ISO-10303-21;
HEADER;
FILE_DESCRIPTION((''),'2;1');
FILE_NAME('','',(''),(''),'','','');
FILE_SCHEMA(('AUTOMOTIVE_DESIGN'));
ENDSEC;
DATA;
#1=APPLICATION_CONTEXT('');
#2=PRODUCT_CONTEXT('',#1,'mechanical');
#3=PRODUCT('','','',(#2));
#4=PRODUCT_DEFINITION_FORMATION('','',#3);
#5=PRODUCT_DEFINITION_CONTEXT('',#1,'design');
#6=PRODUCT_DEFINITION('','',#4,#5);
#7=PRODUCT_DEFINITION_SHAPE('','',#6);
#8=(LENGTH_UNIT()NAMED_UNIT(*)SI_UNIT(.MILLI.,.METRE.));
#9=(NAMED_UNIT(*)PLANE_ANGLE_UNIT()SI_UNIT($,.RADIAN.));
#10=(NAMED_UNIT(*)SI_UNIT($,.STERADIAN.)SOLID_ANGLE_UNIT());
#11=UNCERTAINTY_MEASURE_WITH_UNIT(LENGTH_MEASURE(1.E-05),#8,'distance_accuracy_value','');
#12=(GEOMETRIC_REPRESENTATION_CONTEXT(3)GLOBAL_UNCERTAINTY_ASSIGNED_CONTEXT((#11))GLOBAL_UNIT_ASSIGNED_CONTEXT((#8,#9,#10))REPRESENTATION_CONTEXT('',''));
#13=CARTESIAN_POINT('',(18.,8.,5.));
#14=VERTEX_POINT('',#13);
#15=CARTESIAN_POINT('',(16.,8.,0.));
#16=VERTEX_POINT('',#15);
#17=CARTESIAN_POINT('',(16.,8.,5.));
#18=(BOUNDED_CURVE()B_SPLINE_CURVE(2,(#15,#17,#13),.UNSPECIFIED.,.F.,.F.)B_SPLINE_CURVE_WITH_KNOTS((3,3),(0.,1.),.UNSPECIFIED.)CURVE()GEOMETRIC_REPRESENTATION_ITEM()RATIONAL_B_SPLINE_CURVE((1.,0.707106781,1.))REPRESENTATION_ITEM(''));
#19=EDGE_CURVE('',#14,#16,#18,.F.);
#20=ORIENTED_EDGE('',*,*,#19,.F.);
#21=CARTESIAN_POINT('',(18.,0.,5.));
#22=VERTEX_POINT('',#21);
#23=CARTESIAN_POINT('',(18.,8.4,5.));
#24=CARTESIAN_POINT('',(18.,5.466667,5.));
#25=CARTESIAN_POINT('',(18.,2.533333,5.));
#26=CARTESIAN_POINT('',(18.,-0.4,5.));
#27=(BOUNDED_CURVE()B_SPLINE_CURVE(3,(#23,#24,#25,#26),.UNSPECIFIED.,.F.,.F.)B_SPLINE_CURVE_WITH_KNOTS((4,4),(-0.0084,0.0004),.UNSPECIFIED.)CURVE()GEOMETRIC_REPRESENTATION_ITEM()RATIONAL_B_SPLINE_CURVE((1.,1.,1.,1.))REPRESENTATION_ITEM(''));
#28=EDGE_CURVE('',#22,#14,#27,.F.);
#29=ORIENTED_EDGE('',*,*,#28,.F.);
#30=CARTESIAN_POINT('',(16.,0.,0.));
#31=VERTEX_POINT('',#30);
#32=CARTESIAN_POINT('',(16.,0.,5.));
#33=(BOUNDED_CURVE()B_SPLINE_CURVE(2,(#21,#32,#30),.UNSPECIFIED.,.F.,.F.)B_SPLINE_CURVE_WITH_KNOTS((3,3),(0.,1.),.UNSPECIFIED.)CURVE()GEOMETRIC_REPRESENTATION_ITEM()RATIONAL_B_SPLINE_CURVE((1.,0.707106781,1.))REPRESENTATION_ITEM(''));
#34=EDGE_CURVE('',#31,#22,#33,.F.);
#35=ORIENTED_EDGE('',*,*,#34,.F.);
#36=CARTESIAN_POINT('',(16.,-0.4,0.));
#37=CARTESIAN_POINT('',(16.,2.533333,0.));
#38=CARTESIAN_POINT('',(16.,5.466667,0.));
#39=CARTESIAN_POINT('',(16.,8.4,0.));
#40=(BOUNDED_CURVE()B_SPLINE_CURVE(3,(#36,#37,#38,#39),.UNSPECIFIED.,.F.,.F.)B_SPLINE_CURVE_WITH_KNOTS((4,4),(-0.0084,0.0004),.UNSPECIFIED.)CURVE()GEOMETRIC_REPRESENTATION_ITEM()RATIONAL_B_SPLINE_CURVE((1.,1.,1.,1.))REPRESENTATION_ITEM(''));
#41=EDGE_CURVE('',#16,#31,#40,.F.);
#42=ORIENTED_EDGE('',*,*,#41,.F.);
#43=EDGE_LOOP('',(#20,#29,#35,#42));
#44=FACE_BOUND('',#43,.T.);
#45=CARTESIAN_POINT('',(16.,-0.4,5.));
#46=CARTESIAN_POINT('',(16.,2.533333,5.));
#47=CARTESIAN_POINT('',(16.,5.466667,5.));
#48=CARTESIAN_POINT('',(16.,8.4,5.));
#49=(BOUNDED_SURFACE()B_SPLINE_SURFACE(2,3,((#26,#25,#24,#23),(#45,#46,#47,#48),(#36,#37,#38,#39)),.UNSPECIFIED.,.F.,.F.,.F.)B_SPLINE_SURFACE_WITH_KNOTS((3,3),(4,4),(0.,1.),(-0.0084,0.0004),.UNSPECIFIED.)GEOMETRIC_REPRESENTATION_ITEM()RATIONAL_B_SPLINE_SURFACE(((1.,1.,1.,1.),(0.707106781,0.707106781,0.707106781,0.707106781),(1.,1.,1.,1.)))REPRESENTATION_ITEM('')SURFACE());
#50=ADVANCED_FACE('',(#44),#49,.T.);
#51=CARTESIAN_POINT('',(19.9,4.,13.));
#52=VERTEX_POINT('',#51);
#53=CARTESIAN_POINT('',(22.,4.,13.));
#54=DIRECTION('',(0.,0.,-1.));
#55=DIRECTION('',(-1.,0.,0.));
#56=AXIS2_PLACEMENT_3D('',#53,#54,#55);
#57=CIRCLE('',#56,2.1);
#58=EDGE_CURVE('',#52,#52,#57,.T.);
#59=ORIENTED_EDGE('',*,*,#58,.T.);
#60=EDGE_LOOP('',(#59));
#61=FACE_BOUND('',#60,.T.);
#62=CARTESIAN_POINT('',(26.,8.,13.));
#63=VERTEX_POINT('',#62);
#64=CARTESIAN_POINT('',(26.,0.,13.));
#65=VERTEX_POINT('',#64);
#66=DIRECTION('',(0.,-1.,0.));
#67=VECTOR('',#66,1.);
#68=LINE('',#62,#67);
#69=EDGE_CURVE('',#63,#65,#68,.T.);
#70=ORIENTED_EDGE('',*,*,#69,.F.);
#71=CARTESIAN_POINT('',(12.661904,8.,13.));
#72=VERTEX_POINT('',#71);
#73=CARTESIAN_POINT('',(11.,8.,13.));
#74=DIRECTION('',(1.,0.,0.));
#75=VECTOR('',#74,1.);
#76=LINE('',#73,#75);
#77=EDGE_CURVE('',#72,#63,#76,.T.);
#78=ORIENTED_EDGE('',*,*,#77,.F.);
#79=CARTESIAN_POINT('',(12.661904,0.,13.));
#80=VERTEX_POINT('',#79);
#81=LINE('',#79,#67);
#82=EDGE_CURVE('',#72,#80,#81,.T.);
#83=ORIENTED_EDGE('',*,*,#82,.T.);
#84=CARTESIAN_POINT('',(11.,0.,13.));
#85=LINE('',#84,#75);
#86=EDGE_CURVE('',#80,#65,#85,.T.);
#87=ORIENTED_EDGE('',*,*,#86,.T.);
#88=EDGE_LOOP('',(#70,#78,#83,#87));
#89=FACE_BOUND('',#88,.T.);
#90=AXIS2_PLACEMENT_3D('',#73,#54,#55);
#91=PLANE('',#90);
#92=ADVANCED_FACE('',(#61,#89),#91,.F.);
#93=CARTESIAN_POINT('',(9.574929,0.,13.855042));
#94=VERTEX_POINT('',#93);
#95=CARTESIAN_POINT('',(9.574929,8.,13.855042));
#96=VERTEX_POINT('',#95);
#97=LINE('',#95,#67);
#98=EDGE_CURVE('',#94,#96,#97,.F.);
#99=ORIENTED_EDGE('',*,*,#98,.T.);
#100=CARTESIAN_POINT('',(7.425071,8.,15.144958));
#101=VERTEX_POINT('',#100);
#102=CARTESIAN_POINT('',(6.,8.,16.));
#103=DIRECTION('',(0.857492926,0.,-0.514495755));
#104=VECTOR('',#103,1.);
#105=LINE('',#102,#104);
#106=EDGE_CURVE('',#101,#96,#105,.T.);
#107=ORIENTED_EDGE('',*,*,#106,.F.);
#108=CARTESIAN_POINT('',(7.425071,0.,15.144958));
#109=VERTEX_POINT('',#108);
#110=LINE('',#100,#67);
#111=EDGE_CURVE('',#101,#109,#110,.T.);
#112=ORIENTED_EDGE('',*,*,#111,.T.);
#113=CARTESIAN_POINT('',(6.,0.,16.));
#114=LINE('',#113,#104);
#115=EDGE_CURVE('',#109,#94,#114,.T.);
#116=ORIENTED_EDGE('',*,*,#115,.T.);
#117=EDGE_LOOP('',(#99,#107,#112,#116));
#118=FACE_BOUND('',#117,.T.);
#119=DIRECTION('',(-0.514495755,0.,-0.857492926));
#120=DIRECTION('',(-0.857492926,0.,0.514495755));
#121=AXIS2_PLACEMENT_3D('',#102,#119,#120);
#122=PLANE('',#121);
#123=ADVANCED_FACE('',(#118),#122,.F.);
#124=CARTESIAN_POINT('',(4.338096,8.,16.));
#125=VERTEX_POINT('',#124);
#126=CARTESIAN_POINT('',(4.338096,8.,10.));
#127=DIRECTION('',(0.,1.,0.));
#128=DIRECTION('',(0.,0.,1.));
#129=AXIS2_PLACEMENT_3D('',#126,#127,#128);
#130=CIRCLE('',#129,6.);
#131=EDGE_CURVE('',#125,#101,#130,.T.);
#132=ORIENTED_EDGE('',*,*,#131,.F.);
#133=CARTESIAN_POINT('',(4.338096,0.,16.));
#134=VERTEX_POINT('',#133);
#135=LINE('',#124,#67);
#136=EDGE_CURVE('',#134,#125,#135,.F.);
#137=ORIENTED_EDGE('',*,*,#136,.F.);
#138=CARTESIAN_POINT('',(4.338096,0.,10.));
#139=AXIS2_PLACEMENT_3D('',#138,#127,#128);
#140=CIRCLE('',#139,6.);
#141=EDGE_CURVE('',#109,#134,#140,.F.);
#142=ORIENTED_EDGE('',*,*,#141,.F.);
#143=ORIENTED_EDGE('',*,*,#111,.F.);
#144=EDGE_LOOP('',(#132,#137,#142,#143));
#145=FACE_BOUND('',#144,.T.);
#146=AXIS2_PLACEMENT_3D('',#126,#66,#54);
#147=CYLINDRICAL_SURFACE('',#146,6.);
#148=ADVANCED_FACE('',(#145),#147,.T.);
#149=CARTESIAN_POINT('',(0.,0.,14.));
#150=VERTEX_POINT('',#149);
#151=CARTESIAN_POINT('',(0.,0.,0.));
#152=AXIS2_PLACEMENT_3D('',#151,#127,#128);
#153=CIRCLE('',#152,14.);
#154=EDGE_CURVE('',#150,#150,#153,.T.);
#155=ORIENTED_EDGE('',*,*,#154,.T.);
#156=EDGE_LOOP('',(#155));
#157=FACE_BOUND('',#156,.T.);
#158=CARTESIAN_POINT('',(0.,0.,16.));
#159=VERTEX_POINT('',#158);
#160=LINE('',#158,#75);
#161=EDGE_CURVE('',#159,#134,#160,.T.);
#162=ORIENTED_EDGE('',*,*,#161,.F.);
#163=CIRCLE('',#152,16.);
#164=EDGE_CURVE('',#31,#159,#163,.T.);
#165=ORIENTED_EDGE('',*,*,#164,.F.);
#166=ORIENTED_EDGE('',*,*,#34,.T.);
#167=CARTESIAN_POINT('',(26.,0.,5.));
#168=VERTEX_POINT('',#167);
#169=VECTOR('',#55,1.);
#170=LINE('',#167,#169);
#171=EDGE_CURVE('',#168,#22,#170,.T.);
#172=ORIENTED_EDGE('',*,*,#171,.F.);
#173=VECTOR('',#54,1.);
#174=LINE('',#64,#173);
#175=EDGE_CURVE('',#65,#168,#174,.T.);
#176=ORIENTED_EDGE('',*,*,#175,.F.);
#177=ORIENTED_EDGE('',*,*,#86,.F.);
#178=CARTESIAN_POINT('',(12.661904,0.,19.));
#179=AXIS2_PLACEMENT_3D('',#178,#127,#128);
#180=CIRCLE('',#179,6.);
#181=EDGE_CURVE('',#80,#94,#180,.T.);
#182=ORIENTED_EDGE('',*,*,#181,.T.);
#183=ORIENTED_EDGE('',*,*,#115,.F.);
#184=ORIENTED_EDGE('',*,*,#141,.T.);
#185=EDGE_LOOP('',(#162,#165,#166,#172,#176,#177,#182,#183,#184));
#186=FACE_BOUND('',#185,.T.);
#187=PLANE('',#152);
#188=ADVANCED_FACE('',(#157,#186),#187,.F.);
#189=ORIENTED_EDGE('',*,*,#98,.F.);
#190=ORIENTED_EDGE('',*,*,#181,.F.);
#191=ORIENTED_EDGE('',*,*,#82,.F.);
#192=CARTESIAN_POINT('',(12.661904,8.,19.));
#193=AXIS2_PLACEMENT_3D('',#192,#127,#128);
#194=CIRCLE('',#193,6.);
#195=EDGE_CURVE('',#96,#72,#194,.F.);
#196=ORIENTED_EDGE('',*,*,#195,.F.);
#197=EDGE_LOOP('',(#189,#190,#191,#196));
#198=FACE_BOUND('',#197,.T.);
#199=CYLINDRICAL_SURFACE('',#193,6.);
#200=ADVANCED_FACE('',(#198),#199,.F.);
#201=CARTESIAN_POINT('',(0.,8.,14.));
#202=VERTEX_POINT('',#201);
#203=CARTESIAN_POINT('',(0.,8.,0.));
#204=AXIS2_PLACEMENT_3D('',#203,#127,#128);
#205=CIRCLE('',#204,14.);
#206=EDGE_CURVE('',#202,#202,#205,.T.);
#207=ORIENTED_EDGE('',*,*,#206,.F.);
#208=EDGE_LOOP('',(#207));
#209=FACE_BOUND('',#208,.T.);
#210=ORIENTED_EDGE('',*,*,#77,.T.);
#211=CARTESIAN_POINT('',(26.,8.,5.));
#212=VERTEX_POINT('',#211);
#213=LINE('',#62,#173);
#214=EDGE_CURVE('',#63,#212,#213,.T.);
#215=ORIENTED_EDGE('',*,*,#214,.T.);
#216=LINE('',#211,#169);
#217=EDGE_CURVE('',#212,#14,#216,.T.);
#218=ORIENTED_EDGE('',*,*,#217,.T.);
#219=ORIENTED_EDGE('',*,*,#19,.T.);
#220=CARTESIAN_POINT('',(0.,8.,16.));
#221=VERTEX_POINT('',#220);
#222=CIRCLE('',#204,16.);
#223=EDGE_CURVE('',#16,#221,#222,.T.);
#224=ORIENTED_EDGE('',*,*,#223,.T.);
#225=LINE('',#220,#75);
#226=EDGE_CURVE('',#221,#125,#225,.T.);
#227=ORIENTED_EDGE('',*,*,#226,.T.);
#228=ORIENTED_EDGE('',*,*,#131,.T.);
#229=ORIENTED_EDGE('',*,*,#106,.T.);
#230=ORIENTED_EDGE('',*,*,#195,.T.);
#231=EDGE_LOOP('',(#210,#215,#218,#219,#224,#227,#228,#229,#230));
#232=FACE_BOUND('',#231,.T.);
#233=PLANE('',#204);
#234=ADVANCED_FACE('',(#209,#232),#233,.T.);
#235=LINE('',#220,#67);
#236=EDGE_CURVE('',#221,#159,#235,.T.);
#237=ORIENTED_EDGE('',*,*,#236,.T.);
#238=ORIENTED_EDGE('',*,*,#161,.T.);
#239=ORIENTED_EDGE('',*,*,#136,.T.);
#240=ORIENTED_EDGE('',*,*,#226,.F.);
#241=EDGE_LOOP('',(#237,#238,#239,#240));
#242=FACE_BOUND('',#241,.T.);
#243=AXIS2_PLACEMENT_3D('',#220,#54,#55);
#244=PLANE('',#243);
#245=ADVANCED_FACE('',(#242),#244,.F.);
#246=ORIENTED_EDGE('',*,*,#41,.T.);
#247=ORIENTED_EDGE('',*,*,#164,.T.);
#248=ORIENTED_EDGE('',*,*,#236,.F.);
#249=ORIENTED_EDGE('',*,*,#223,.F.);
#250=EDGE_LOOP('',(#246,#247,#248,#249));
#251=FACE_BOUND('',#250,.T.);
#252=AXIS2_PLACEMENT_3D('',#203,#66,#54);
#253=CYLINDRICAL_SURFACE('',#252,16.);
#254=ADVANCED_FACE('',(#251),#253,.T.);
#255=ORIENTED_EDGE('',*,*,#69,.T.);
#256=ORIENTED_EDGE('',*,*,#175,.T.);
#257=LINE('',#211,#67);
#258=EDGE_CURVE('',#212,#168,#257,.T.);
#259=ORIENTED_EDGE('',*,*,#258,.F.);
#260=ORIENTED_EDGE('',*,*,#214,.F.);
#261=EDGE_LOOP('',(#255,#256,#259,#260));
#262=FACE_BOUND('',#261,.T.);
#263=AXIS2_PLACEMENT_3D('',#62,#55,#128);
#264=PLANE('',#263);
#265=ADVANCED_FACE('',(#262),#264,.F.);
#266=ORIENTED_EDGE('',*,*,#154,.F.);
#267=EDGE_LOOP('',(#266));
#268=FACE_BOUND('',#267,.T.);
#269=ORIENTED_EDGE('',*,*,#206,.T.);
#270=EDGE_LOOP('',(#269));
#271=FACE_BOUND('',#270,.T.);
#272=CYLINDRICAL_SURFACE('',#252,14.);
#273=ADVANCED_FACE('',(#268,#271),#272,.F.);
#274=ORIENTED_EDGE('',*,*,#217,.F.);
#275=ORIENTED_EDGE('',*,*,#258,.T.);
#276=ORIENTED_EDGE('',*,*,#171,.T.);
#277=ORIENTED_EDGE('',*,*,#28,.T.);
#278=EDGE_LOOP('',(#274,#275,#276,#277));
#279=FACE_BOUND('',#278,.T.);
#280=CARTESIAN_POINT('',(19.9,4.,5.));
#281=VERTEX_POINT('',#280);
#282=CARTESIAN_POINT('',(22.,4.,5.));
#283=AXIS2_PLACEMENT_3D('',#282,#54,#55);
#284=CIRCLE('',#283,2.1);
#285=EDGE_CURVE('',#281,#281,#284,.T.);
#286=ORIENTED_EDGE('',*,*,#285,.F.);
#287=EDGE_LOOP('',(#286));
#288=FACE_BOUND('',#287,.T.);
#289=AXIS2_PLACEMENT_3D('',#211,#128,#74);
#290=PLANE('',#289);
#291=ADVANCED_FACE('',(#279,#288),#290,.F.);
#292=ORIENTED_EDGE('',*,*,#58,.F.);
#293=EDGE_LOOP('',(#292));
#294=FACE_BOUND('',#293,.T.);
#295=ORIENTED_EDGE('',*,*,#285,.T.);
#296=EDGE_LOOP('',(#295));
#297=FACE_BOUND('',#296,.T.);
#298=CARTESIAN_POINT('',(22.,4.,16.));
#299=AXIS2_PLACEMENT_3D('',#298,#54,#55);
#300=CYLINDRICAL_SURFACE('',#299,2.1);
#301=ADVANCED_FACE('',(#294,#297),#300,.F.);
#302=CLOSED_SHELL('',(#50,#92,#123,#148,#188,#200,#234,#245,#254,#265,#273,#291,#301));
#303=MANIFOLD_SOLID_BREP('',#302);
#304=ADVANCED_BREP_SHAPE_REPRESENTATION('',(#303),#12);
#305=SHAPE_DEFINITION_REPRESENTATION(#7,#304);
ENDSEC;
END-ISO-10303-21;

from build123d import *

# Parameters (mm, degrees)
SKETCH1_R           = 14
BOSS_EXTRUDE1_DEPTH = 8
FILLET2_R           = 6
SKETCH2_R           = 2.1
CUT_EXTRUDE1_DEPTH  = 35.365680555
FILLET3_SIZE        = 5
FILLET3_SIZE_2      = 2


with BuildPart() as part:
    # Sketch1 → Boss-Extrude1 (new body)
    with BuildSketch(Plane(origin=(0, 0, 0), x_dir=(1, 0, 0), z_dir=(0, 1, 0))):
        with BuildLine():
            Line((0, -16), (6, -16))
            Line((6, -16), (11, -13))
            Line((11, -13), (26, -13))
            Line((26, -13), (26, -5))
            Line((26, -5), (16, -5))
            Line((16, -5), (16, 0))
            ThreePointArc((16, 0), (-11.313708499, 11.313708499), (0, -16))
        make_face()
        with Locations(Location((0, 0, 0), (0, 0, 270))):
            Circle(SKETCH1_R, mode=Mode.SUBTRACT)
    extrude(amount=BOSS_EXTRUDE1_DEPTH)

    # Fillet2
    fillet2_edges = [part.edges().sort_by_distance(p)[0] for p in [
        (11, 4, 13),
        (6, 4, 16),
    ]]
    fillet(fillet2_edges, radius=FILLET2_R)

    # Sketch2 → Cut-Extrude1 (cut, through all)
    with BuildSketch(Plane(origin=(0, 0, 5), x_dir=(-1, 0, 0), z_dir=(0, 0, -1))):
        with Locations((-22, 4)):
            Circle(SKETCH2_R)
    extrude(amount=-CUT_EXTRUDE1_DEPTH, mode=Mode.SUBTRACT)

    # Fillet3
    # an asymmetric fillet: 5, 2 mm, written as the material it adds along each edge
    with BuildSketch(Plane(origin=(16, 0, 5), x_dir=(0, 0, -1), z_dir=(0, 1, 0))) as fillet3_piece_1:
        with BuildLine():
            Bezier((FILLET3_SIZE, 0), (0, 0), (0, -FILLET3_SIZE_2), weights=[1, 0.707106781, 1])
            Line((0, -FILLET3_SIZE_2), (0, 0))
            Line((0, 0), (FILLET3_SIZE, 0))
        make_face()
    extrude(amount=8)


solid = part.part
